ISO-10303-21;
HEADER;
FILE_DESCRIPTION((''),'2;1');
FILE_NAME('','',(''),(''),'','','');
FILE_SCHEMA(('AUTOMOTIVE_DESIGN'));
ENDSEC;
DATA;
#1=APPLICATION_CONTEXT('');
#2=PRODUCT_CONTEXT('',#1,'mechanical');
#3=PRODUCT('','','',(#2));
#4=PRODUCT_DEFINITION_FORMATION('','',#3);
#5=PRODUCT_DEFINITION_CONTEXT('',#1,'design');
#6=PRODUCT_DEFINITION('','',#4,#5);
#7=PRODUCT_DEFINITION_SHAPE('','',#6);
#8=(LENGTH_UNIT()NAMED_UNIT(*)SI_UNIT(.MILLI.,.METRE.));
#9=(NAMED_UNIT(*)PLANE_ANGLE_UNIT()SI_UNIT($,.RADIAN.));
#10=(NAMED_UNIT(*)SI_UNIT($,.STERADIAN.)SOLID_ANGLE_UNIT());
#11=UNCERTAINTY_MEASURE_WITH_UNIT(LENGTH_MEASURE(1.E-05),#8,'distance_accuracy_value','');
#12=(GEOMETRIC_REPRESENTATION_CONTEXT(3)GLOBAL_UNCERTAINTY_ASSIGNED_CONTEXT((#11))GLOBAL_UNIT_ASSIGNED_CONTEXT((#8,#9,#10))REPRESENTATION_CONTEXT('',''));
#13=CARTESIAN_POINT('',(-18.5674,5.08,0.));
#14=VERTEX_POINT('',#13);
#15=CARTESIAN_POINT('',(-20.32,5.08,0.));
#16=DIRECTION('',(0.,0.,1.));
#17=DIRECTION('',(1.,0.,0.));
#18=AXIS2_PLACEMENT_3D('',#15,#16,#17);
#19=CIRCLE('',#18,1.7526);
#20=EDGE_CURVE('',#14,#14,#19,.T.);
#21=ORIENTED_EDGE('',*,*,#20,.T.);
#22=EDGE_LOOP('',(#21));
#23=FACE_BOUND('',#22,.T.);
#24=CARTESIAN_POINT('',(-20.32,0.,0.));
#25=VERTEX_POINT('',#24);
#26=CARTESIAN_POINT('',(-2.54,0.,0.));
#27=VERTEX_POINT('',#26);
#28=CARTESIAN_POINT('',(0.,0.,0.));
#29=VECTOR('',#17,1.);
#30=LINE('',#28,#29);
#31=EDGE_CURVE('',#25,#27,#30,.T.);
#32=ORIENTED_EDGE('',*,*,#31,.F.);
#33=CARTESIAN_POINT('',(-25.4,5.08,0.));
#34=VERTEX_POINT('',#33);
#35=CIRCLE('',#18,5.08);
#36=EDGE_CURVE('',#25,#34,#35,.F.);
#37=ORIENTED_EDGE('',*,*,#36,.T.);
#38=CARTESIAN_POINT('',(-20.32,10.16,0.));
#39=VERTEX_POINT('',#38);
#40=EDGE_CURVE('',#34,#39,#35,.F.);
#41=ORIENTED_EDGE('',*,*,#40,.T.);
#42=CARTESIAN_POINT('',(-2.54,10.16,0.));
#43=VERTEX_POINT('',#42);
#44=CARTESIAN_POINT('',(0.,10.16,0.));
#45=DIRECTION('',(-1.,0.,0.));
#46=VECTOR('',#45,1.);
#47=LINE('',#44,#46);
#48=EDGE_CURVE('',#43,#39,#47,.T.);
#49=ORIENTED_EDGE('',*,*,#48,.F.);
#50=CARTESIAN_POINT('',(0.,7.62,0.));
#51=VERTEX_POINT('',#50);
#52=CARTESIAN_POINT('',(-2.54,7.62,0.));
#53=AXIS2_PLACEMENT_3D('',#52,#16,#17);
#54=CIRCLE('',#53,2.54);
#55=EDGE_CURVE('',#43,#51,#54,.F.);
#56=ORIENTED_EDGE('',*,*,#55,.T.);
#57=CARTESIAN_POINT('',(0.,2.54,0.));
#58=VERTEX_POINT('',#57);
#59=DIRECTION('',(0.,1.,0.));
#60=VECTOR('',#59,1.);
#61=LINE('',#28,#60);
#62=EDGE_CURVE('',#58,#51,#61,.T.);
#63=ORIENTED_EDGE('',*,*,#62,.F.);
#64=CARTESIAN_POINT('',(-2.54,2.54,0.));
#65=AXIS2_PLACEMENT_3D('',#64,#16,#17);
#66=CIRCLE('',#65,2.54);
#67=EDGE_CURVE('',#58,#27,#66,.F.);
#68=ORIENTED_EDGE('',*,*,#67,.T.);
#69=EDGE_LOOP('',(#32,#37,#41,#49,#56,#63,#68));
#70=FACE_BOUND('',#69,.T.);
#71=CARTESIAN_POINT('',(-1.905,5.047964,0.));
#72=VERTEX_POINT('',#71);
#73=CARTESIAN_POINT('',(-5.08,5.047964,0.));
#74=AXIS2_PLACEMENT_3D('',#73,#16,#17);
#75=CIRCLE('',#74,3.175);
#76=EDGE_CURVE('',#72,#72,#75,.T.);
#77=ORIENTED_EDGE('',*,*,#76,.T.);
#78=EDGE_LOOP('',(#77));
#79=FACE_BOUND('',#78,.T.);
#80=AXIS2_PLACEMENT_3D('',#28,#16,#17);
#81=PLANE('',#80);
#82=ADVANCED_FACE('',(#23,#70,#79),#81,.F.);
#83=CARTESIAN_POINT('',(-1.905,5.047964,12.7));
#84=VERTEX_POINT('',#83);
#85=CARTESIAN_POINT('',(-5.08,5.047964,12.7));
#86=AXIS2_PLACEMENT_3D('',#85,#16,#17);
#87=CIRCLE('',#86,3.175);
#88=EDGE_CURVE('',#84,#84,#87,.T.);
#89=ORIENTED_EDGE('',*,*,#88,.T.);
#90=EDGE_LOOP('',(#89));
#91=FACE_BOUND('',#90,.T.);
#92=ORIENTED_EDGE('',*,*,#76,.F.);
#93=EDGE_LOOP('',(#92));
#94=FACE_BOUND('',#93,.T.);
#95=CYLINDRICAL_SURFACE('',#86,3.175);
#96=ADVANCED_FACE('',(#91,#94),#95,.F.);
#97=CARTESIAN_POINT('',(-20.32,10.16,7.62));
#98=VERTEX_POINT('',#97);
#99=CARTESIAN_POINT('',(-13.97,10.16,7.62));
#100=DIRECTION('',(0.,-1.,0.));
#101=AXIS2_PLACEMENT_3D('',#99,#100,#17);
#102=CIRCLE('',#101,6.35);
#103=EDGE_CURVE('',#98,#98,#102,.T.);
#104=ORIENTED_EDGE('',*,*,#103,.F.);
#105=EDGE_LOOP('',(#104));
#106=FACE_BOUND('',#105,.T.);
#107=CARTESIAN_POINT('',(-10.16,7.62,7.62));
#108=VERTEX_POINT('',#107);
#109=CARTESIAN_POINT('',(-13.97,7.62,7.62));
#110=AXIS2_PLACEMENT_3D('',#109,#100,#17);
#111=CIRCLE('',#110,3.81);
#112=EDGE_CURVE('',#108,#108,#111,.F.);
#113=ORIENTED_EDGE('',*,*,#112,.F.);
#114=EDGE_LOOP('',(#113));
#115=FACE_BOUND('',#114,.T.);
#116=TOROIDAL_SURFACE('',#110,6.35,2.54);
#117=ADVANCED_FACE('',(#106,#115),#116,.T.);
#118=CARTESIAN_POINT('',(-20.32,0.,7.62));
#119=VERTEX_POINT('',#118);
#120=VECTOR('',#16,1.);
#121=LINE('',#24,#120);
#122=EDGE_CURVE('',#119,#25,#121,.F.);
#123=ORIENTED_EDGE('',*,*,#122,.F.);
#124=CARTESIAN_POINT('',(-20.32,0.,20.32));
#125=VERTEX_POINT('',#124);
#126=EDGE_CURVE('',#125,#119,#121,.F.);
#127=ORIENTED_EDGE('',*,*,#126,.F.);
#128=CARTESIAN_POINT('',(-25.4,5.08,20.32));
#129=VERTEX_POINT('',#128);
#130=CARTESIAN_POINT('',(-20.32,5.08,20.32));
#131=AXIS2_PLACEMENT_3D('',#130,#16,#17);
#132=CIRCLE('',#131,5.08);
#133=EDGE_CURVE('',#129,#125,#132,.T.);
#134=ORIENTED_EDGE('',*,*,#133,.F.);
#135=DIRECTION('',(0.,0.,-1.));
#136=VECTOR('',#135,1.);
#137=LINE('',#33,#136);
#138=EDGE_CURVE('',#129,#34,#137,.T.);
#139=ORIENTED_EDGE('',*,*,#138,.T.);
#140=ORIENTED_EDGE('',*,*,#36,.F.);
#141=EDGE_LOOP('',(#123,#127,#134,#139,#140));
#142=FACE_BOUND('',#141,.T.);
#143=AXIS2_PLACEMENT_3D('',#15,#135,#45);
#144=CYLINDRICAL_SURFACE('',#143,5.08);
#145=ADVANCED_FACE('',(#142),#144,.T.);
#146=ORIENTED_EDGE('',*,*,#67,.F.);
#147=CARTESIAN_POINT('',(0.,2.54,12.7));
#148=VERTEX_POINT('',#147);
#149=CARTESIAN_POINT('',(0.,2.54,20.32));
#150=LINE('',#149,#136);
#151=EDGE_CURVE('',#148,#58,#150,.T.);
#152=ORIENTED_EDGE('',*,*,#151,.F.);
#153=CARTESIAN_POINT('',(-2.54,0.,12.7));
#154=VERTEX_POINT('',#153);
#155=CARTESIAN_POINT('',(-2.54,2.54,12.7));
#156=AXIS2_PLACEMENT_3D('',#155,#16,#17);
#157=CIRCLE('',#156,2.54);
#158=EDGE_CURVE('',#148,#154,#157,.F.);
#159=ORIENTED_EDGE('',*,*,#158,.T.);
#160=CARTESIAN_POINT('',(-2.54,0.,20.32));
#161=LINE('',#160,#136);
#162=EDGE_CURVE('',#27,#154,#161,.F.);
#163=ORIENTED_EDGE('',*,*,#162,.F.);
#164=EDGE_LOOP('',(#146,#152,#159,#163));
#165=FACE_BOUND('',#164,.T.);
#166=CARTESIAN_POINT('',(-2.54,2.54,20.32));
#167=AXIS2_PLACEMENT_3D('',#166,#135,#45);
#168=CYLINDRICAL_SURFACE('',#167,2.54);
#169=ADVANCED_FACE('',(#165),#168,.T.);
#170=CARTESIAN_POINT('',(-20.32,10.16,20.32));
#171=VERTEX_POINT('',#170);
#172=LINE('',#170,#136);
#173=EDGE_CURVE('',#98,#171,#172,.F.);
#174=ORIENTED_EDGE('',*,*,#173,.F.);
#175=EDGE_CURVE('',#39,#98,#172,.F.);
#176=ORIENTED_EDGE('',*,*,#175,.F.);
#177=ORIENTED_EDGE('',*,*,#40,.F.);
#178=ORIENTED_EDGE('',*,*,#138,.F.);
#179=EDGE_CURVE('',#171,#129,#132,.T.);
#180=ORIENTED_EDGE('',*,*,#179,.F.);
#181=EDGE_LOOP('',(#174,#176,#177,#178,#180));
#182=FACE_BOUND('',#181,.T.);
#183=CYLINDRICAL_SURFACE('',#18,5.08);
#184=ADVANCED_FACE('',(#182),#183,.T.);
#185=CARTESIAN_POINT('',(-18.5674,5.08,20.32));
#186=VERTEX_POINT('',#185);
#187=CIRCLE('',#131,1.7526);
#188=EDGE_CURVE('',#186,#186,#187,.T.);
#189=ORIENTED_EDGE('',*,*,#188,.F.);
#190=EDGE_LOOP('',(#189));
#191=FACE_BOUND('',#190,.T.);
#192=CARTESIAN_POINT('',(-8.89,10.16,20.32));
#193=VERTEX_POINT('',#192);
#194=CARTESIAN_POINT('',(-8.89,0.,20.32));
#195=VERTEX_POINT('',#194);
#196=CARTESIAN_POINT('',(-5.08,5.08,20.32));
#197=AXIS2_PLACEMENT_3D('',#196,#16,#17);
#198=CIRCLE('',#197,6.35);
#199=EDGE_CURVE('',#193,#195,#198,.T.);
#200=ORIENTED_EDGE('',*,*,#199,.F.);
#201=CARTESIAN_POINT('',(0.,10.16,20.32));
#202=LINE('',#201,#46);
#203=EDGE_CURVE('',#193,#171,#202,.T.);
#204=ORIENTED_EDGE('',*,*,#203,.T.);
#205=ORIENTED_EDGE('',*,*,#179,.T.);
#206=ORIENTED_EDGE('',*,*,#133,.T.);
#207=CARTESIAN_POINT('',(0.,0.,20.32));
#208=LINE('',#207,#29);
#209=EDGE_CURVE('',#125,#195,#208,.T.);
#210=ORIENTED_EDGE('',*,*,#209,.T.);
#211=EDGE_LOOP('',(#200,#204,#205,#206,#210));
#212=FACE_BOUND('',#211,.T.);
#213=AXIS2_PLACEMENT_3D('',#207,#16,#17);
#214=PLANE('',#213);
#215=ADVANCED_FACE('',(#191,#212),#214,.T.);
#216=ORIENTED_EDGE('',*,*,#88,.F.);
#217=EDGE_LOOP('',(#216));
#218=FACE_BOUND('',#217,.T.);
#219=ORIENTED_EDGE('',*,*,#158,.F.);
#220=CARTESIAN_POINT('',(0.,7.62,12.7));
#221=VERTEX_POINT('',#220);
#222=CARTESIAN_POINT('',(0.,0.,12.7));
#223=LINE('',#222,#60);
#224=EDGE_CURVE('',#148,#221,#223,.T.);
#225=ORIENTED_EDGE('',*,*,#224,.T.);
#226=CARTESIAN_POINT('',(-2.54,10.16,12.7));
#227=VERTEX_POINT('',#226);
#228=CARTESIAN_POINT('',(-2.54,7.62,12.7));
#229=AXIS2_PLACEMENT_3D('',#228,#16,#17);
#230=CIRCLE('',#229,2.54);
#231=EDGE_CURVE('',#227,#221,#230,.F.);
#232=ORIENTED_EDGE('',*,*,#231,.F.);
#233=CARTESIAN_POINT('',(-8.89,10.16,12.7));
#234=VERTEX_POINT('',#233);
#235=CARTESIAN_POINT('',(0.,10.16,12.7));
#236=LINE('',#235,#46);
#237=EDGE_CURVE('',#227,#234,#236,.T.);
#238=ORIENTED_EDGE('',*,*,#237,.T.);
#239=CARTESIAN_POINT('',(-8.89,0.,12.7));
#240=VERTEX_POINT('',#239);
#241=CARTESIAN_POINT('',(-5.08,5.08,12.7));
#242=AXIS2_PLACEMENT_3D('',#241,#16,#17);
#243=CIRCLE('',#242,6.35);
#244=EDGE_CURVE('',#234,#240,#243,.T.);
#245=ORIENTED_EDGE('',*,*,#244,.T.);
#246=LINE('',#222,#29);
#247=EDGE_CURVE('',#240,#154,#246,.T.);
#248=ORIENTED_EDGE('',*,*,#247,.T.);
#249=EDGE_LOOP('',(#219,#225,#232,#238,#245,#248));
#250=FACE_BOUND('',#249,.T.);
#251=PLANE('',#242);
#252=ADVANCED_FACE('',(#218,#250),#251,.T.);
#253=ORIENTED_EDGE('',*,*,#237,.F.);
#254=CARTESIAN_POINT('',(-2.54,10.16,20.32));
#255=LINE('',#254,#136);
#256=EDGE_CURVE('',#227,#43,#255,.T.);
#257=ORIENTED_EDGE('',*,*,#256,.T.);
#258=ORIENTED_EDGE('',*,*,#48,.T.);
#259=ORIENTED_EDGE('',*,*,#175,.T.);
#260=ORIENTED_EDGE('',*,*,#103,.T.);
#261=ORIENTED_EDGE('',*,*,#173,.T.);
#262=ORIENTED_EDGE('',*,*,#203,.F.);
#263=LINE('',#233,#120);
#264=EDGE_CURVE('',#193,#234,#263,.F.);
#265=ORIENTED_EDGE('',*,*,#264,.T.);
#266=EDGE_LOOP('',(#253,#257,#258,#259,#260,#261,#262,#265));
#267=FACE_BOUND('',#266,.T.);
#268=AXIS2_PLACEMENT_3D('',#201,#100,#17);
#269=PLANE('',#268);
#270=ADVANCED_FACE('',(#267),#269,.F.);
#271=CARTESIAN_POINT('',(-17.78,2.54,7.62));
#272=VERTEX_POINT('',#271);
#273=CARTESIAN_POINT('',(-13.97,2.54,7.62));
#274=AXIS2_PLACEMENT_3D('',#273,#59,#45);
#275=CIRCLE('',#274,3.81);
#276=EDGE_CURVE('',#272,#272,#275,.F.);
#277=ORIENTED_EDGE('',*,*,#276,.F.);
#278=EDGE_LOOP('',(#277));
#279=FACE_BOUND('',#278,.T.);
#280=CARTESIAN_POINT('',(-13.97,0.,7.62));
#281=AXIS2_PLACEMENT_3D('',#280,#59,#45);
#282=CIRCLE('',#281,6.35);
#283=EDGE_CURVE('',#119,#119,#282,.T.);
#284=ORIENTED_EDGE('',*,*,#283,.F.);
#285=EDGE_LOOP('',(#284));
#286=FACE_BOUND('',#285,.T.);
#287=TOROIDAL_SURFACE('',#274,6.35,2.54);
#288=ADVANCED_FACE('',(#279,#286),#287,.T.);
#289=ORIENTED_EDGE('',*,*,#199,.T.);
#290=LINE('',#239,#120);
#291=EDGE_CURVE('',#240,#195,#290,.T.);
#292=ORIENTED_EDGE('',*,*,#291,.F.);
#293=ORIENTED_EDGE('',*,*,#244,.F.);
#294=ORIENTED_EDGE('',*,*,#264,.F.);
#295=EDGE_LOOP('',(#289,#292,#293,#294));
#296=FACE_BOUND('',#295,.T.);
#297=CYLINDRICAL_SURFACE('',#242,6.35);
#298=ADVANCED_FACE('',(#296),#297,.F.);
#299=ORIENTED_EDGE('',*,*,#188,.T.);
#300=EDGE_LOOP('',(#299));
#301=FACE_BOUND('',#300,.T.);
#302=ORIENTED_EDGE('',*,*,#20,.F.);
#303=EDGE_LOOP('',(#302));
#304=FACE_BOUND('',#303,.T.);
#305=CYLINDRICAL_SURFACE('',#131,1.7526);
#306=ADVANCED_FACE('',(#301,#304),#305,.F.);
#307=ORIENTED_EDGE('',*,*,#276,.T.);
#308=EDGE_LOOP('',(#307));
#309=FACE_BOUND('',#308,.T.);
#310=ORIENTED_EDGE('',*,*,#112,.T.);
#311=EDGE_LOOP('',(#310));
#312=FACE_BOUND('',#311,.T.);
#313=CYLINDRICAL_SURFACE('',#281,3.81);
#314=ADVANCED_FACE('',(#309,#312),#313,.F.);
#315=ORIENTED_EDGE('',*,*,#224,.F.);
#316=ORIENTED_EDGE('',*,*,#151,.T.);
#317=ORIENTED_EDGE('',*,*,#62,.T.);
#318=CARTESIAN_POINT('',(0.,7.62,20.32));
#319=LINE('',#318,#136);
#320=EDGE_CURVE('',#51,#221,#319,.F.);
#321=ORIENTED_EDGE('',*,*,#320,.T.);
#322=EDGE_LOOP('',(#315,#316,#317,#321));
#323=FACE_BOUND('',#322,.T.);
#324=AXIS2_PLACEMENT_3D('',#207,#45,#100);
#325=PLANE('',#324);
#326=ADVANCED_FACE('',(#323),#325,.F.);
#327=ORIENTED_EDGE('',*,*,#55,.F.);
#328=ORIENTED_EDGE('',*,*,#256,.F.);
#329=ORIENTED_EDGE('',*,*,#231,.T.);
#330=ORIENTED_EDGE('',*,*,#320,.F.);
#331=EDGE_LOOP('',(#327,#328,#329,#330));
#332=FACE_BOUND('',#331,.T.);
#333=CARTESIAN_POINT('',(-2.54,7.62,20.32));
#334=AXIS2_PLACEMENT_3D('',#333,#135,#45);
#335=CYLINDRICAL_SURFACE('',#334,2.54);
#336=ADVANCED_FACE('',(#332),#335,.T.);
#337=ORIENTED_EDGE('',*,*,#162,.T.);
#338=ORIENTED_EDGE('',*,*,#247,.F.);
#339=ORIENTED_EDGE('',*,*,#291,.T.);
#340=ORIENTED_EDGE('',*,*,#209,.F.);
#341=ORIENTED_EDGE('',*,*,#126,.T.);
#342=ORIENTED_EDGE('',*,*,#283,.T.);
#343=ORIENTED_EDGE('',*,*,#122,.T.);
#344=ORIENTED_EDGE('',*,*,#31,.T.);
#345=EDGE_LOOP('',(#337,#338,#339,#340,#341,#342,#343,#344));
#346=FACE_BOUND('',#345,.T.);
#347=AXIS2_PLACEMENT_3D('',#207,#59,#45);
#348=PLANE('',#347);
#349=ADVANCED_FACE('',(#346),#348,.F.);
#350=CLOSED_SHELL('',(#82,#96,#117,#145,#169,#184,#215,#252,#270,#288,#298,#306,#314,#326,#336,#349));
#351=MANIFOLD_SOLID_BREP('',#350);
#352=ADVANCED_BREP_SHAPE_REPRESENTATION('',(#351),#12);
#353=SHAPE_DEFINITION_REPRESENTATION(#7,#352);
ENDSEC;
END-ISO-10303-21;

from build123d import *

# Parameters (mm, degrees)
SKETCH2_W                   = 10.16
SKETCH2_H                   = 10.16
EXTRUDE2_DEPTH              = 20.32
FILLET1_R                   = 2.54
SKETCH5_W                   = 20.32
SKETCH5_H                   = 10.16
EXTRUDE3_DEPTH              = 15.24
FILLET3_R                   = 5.08
SKETCH9_R                   = 3.81
CUT_EXTRUDE1_DEPTH          = 35.077675977
FILLET4_R                   = 2.54
SKETCH10_R                  = 6.35
CUT_EXTRUDE2_DEPTH          = 7.62
F_1_4_0_25_DIAMETER_HOLE1_D = 6.35
F_6_32_TAPPED_HOLE1_D       = 3.5052


with BuildPart() as part:
    # Sketch2 → Extrude2 (new body)
    with BuildSketch(Plane.XY):
        with Locations((-5.08, 5.08)):
            Rectangle(SKETCH2_W, SKETCH2_H)
    extrude(amount=EXTRUDE2_DEPTH)

    # Fillet1
    fillet1_edges = [part.edges().sort_by_distance(p)[0] for p in [
        (0, 0, 10.16),
        (0, 10.16, 10.16),
    ]]
    fillet(fillet1_edges, radius=FILLET1_R)

    # Sketch5 → Extrude3 (add)
    with BuildSketch(Plane.ZY.offset(10.16)):
        with Locations((10.16, 5.08)):
            Rectangle(SKETCH5_W, SKETCH5_H)
    extrude(amount=EXTRUDE3_DEPTH)

    # Fillet3
    fillet3_edges = [part.edges().sort_by_distance(p)[0] for p in [
        (-25.4, 0, 10.16),
        (-25.4, 10.16, 10.16),
    ]]
    fillet(fillet3_edges, radius=FILLET3_R - 0.0001)  # a hair under: the kernel refuses the full size

    # Sketch9 → Cut-Extrude1 (cut, through all)
    with BuildSketch(Plane(origin=(0, 10.16, 0), x_dir=(-1, 0, 0), z_dir=(0, 1, 0))):
        with Locations((13.97, 7.62)):
            Circle(SKETCH9_R)
    extrude(amount=-CUT_EXTRUDE1_DEPTH, mode=Mode.SUBTRACT)

    # Fillet4
    fillet4_edges = [part.edges().sort_by_distance(p)[0] for p in [
        (-10.16, 0, 7.62),
        (-10.16, 10.16, 7.62),
    ]]
    fillet(fillet4_edges, radius=FILLET4_R)

    # Sketch10 → Cut-Extrude2 (cut)
    with BuildSketch(Plane.XY.offset(20.32)):
        with Locations((-5.08, 5.08)):
            Circle(SKETCH10_R)
    extrude(amount=-CUT_EXTRUDE2_DEPTH, mode=Mode.SUBTRACT)

    # 1/4 (0.25) Diameter Hole1 (through all)
    with Locations(Plane(origin=(-5.08, 5.047963929, 12.7), x_dir=(1, 0, 0), z_dir=(0, 0, 1))):
        with Locations((0, 0)):
            Hole(F_1_4_0_25_DIAMETER_HOLE1_D / 2)

    # #6-32 Tapped Hole1 (through all)
    with Locations(Plane(origin=(-20.32, 5.08, 20.32), x_dir=(1, 0, 0), z_dir=(0, 0, 1))):
        with Locations((0, 0)):
            Hole(F_6_32_TAPPED_HOLE1_D / 2)


solid = part.part
